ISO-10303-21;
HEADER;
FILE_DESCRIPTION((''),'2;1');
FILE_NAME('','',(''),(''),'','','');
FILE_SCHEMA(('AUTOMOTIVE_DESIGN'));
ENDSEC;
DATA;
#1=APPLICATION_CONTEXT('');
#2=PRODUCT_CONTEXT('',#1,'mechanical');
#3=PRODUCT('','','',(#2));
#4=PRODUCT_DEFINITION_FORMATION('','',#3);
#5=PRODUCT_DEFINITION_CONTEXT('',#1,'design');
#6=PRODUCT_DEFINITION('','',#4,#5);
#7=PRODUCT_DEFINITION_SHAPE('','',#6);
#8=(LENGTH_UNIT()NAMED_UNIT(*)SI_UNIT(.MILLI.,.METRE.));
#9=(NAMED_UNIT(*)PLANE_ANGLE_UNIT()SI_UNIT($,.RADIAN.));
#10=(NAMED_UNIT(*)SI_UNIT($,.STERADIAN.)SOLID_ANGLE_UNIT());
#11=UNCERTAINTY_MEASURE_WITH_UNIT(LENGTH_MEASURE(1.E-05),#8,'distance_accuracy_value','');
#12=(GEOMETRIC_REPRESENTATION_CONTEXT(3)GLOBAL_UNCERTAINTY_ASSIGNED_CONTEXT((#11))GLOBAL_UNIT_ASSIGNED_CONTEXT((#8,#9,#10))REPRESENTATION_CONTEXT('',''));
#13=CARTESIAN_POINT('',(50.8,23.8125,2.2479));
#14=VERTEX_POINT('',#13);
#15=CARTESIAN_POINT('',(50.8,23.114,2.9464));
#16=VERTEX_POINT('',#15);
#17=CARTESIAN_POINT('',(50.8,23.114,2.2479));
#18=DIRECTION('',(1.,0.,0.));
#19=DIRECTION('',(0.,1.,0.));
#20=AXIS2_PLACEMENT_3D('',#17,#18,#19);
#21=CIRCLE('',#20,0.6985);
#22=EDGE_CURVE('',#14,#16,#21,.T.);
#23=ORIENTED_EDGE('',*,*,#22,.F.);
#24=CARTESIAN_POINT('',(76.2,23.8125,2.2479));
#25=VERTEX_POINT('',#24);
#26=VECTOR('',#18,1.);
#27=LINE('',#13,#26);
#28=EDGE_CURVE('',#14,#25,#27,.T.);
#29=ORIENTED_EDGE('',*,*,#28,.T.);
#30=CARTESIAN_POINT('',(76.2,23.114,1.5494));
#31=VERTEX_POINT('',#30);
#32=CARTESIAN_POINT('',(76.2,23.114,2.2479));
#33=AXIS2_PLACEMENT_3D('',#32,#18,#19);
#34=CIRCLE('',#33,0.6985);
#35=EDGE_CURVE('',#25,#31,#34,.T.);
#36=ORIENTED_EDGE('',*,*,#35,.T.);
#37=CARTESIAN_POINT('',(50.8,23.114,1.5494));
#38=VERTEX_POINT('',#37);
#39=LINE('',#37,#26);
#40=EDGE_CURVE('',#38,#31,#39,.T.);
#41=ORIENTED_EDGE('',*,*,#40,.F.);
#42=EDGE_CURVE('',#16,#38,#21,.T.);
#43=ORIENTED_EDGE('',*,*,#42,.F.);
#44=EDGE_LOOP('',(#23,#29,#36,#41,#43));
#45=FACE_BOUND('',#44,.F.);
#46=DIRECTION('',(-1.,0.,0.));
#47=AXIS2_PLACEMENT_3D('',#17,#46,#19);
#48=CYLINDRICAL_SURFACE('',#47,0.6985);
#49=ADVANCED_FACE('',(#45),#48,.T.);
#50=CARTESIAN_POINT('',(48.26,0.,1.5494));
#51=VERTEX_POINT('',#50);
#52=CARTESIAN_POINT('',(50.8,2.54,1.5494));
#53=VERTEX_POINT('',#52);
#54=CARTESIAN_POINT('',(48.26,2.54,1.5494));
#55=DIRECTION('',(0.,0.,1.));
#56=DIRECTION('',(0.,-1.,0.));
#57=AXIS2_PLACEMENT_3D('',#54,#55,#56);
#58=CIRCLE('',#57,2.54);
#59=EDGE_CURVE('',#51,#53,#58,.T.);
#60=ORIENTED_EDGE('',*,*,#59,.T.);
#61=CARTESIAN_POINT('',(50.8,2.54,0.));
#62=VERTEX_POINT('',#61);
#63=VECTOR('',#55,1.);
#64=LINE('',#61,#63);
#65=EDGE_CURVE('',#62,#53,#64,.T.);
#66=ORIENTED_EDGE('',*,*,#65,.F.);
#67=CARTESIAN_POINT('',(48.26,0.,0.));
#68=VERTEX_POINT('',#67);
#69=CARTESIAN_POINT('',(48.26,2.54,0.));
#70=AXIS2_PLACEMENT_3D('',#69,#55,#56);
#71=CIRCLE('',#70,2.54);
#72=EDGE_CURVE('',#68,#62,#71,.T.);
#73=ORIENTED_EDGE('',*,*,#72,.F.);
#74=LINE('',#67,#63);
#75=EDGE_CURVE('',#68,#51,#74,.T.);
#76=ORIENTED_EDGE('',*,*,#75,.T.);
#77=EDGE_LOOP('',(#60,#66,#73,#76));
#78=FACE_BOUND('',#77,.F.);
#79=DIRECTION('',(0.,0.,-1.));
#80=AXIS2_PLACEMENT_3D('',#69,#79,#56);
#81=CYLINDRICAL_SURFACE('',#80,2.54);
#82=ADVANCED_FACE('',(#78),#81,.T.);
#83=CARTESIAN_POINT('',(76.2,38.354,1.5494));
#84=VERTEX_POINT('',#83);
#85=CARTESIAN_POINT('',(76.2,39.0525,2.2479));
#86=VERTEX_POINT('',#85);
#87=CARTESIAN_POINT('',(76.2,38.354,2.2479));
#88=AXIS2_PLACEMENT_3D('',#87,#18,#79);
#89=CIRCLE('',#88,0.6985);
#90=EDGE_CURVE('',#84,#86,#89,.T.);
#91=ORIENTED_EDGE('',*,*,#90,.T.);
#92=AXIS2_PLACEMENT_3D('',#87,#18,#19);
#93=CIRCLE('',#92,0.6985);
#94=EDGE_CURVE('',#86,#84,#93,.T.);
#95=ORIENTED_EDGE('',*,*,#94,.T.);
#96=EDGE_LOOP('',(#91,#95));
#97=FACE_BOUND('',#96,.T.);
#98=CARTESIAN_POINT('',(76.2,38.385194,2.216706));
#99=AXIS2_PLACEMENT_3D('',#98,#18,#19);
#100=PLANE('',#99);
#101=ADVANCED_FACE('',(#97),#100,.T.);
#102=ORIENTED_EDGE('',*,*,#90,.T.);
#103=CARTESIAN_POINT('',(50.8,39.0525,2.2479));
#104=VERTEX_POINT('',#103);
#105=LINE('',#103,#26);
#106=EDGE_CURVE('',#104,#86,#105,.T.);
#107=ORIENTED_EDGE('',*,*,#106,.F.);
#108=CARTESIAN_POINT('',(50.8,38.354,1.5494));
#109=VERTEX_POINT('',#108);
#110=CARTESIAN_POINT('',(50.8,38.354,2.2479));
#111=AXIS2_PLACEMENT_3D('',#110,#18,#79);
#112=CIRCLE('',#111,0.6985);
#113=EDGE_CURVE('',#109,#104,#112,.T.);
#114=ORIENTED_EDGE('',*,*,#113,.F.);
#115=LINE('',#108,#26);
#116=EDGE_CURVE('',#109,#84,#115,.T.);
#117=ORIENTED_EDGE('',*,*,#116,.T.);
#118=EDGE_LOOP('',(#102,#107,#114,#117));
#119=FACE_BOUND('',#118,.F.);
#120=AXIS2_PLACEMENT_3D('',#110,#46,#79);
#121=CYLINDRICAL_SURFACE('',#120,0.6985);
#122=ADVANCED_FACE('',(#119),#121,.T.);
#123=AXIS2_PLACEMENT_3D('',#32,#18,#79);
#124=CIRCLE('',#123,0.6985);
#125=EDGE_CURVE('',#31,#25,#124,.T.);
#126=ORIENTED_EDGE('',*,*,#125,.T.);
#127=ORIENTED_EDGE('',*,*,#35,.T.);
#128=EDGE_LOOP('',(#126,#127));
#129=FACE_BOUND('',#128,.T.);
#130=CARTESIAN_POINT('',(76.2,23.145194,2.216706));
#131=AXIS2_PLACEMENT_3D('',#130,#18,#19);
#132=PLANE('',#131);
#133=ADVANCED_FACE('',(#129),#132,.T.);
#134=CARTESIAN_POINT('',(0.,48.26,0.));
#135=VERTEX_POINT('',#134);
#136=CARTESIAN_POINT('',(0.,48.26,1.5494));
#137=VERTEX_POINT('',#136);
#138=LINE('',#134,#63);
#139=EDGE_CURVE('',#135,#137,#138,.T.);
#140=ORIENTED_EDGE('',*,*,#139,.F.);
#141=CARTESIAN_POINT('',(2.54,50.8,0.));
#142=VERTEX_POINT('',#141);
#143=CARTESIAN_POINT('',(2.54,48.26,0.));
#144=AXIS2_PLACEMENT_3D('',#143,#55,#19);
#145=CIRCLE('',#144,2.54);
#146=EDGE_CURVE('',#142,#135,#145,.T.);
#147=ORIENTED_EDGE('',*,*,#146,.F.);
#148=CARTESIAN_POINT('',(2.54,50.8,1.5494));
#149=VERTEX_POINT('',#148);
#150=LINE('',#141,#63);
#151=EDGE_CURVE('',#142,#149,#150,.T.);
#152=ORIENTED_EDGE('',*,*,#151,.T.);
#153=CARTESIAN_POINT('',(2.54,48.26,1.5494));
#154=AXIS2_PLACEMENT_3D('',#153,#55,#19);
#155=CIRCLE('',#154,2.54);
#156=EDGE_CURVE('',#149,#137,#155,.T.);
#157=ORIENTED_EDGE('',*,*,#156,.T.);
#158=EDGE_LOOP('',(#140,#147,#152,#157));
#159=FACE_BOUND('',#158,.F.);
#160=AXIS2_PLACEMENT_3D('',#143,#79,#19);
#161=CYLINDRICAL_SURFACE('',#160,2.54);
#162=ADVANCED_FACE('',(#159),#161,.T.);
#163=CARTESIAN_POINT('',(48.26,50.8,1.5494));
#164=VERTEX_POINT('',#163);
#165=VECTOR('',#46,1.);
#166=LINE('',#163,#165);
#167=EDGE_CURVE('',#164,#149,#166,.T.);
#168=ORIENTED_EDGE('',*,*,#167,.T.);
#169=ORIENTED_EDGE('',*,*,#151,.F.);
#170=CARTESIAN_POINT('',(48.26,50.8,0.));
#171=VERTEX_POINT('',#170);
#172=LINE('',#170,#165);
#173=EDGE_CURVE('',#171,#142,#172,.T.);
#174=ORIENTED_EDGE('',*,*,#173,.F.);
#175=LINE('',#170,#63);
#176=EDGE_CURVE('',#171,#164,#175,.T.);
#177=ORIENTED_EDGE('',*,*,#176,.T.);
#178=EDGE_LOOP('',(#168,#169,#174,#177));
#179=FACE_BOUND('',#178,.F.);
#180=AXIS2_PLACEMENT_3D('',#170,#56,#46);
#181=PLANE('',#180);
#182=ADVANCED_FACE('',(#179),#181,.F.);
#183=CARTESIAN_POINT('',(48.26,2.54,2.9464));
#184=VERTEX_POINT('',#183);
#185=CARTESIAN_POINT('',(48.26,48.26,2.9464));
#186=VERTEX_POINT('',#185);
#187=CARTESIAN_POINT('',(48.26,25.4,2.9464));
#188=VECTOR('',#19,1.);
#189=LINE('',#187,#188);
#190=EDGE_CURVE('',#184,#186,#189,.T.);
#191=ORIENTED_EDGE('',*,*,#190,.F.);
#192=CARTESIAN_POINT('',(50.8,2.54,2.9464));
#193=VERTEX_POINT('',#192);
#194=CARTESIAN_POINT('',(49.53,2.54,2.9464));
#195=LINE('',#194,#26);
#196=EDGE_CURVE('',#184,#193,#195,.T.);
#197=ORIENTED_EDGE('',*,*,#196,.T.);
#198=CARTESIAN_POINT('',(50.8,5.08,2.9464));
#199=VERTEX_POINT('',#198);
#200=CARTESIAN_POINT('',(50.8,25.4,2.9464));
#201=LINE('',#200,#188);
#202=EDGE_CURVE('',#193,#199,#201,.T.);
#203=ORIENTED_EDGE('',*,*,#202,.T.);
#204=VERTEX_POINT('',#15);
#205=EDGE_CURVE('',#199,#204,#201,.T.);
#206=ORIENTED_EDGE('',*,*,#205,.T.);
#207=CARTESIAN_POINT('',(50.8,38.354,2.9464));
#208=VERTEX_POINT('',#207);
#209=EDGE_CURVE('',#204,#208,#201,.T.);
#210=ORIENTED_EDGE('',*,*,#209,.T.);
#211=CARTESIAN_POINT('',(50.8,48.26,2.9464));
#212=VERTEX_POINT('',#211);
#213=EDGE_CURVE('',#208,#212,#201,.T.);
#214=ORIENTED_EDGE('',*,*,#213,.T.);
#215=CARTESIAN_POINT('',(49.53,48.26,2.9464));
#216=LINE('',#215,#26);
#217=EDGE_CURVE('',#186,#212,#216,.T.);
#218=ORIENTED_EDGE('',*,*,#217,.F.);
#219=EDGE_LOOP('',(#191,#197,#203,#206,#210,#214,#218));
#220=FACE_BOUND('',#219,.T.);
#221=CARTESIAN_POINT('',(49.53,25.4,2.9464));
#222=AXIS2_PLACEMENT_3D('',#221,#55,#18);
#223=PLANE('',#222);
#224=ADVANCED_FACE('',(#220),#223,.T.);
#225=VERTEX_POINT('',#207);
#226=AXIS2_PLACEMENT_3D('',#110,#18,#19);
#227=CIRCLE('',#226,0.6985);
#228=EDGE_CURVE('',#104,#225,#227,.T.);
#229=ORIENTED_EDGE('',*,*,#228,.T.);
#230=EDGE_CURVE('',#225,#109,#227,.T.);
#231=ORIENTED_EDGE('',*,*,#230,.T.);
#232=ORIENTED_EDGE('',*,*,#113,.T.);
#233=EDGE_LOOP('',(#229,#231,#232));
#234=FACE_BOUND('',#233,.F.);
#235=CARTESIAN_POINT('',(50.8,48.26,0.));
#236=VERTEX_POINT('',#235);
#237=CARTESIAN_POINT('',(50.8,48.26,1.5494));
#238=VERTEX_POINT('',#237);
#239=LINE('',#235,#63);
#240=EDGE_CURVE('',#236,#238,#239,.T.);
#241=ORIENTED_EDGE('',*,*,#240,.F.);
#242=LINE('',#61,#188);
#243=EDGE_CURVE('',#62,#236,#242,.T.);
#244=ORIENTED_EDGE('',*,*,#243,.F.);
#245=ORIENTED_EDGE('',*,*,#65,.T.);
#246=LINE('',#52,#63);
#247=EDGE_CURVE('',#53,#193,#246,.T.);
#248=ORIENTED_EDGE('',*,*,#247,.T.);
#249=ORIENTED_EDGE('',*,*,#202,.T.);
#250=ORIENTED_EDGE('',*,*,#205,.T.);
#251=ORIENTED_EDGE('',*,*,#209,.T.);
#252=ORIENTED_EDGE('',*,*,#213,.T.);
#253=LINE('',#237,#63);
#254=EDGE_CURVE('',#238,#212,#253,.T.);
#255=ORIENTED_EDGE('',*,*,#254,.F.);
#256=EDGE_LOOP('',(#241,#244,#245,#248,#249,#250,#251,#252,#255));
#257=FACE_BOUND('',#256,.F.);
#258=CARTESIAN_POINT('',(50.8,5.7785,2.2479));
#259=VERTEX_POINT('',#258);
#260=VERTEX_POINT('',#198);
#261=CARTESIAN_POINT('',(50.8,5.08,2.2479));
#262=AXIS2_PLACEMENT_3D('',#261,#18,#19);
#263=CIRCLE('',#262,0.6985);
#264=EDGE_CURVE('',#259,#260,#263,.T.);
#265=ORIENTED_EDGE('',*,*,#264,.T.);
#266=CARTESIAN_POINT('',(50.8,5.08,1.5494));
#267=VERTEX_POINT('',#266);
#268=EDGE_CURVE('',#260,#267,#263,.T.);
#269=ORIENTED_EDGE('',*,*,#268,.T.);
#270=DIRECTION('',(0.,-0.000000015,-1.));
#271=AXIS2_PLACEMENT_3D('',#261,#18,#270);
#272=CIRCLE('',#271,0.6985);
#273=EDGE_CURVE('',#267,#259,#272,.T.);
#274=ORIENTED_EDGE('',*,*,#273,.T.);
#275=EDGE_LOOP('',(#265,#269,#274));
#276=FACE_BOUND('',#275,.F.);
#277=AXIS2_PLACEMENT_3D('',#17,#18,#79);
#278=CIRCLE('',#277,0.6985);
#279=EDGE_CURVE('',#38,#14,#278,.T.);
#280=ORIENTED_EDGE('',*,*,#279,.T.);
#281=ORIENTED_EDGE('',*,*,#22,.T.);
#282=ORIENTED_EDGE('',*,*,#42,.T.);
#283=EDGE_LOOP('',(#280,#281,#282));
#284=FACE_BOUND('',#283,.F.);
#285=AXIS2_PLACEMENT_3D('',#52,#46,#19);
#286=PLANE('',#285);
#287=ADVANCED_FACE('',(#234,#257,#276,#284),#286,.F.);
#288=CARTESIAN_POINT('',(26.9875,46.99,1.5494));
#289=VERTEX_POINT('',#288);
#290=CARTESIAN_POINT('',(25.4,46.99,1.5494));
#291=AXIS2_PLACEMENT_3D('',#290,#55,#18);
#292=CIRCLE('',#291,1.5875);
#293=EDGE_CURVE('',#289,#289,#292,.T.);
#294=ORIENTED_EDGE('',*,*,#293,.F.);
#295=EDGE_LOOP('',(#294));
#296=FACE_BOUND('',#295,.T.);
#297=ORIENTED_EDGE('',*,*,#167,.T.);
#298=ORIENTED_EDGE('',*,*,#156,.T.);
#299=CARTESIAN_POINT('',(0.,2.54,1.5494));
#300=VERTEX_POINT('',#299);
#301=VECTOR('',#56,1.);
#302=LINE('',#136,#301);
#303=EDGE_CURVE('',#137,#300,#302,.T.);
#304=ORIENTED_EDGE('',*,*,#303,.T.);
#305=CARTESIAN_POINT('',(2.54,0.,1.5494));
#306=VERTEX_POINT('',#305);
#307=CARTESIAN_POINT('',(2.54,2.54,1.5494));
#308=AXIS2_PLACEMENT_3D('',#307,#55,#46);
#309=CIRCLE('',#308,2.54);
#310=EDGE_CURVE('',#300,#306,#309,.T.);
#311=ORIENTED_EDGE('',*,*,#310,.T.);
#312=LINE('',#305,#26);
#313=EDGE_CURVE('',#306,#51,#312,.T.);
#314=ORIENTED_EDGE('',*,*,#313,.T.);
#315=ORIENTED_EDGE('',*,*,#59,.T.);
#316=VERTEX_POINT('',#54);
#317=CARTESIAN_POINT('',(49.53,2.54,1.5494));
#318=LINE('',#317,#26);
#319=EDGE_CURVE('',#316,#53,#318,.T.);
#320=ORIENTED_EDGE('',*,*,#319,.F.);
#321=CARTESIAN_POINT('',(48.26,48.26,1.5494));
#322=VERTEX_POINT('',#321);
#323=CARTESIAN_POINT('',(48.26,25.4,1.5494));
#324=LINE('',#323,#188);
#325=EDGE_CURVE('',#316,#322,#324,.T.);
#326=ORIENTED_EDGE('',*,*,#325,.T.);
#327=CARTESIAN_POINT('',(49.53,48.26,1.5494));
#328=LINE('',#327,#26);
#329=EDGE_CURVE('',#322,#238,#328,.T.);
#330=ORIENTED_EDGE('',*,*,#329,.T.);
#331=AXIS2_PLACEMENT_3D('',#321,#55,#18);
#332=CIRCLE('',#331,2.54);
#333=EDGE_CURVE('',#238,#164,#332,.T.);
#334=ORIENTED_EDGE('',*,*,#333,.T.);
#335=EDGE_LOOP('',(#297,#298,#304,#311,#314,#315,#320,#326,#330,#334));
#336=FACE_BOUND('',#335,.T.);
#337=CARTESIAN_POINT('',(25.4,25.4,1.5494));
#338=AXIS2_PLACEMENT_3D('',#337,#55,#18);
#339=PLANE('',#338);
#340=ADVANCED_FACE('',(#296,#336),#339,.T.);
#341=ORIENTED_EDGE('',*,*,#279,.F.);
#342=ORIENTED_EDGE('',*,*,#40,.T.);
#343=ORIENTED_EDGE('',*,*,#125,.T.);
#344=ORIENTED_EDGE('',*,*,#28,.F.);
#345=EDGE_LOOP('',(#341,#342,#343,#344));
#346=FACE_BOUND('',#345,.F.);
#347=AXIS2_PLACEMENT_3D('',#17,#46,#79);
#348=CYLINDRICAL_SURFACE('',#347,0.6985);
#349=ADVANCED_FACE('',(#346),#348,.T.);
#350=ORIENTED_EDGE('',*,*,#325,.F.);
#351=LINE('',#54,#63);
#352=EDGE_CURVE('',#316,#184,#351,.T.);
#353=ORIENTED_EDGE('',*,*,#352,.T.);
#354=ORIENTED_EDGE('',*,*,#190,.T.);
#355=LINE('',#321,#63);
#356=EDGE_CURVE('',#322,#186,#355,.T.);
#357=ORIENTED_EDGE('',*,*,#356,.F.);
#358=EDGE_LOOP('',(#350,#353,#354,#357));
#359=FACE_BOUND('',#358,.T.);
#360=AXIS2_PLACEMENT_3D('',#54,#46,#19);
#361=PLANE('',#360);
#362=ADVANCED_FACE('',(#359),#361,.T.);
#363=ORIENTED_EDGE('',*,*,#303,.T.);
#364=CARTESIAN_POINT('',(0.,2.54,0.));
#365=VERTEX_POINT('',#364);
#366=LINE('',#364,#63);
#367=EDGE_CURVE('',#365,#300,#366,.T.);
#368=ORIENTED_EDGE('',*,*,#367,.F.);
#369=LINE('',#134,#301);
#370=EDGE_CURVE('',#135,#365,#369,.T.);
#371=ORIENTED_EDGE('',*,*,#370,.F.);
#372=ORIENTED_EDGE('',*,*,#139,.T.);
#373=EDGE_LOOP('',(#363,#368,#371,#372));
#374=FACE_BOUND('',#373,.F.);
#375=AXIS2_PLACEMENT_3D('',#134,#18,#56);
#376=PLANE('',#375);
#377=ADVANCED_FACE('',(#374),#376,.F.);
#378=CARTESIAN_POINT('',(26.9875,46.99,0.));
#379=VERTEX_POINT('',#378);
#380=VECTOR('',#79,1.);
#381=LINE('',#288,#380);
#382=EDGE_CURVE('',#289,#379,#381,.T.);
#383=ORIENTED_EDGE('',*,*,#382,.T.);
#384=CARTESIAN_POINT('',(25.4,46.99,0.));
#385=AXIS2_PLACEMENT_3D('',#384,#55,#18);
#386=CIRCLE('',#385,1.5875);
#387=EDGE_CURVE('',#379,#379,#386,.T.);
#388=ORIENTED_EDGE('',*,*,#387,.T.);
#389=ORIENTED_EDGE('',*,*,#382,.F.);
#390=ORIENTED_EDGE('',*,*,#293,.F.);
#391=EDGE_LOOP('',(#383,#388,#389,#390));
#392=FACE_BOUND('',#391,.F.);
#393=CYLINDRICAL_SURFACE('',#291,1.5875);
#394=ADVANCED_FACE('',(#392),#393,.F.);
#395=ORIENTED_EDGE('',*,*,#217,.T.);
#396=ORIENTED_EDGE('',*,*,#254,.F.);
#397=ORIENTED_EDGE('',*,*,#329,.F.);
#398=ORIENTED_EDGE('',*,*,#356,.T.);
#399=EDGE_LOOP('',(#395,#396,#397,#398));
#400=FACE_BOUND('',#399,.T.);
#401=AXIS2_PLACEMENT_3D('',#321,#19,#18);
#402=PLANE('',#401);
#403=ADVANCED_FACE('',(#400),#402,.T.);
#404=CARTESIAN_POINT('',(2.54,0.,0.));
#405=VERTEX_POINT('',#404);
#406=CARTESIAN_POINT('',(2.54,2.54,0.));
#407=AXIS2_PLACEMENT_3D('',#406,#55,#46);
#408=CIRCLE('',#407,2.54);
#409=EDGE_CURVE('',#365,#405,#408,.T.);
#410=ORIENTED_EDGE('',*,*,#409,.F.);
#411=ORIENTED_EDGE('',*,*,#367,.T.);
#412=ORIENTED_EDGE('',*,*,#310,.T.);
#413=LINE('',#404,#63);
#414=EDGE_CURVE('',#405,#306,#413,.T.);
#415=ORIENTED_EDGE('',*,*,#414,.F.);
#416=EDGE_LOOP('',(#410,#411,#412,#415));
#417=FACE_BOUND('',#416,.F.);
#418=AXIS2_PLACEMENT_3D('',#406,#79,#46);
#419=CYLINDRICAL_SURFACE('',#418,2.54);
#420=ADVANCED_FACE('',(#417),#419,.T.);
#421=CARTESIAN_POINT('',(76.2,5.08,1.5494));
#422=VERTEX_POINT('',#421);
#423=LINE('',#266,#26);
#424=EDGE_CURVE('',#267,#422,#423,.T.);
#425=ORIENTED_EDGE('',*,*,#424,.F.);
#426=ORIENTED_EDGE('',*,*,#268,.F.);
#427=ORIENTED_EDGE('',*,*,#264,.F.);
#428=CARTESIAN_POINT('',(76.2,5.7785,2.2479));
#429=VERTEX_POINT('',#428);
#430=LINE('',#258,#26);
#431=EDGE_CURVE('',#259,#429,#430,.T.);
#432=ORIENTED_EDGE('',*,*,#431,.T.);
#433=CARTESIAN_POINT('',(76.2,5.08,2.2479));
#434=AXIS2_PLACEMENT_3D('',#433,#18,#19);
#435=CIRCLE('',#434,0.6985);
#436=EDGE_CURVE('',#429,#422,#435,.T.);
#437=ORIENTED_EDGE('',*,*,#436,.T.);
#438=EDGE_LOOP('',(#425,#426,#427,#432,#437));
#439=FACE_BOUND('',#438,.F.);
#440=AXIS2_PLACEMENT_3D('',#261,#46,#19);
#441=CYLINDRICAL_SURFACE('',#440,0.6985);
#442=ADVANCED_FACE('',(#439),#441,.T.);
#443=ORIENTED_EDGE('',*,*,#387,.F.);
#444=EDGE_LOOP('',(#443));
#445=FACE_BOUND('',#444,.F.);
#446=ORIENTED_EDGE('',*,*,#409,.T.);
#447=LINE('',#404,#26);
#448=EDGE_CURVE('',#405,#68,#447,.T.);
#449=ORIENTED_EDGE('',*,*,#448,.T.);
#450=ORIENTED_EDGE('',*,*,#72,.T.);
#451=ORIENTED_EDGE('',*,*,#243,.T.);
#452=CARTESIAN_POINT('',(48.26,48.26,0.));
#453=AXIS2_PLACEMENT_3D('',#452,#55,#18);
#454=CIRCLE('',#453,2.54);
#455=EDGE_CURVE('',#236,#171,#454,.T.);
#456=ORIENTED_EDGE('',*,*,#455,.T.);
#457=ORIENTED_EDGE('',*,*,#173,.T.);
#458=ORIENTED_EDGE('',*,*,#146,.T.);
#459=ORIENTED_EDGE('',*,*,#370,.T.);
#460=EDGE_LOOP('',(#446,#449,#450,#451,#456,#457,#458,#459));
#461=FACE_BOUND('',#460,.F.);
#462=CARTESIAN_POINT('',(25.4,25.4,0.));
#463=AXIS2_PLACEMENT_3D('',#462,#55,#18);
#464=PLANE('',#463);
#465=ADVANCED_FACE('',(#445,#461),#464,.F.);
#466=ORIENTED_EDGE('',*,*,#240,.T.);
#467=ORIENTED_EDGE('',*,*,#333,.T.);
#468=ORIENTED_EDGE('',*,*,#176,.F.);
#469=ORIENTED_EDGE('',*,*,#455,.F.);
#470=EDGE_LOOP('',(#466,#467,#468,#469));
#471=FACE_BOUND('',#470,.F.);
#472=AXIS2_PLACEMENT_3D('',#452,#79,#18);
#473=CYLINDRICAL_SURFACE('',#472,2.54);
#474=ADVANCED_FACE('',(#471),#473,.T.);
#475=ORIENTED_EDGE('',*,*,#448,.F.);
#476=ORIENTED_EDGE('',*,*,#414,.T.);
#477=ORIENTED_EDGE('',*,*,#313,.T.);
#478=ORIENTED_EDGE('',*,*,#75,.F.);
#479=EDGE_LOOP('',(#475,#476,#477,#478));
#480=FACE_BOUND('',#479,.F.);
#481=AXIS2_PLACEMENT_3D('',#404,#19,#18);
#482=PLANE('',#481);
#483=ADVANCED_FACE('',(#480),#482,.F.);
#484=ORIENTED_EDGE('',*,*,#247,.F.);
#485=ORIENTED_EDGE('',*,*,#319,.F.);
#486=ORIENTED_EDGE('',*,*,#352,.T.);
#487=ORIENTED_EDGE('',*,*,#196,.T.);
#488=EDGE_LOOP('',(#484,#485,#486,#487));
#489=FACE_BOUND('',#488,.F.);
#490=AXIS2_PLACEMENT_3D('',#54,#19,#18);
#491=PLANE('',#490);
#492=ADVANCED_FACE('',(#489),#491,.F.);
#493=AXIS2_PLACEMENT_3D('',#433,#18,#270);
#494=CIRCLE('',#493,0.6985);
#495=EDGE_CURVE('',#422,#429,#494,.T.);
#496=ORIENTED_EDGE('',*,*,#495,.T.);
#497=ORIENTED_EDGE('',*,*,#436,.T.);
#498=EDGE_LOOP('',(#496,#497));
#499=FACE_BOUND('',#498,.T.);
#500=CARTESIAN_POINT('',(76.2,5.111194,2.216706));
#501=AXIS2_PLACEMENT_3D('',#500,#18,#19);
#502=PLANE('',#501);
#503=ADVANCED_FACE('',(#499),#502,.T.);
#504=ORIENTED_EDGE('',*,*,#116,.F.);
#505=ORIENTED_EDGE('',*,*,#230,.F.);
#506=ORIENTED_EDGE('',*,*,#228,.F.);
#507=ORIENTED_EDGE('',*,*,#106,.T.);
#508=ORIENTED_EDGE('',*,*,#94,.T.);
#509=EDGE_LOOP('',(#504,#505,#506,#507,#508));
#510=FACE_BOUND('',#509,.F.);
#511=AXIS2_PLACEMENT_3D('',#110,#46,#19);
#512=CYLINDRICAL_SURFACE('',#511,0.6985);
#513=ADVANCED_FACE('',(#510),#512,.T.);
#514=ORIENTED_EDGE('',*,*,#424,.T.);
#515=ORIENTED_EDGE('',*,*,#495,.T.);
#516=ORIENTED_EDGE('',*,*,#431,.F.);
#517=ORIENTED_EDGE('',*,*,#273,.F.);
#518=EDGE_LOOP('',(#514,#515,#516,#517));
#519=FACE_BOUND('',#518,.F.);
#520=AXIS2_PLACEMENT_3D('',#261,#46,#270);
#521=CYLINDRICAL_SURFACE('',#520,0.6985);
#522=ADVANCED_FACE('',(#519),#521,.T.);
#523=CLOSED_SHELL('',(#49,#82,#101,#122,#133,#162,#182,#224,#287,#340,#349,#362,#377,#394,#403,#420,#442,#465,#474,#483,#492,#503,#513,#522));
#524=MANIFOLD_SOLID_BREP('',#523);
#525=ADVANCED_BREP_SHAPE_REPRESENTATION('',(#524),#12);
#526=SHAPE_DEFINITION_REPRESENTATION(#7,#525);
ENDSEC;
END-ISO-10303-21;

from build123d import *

# Parameters (mm, degrees)
F1_DEPTH = 1.5494
F2_R     = 1.5875
F3_DEPTH = 25.4
F5_W     = 2.54
F5_H     = 45.72
F6_DEPTH = 1.397
F7_DEPTH = 25.4


# Not quite as in the source:
# - a feature names something its author has since deleted; it is built from what else it names


with BuildPart() as f1:
    # F0 (on Top) → F1 (new body)
    with BuildSketch(Plane.XY):
        with BuildLine():
            ThreePointArc((0, 2.54), (0.7439487758, 0.7439487758), (2.54, 0))
            Line((2.54, 0), (48.26, 0))
            ThreePointArc((48.26, 0), (50.0560512242, 0.7439487758), (50.8, 2.54))
            Line((50.8, 2.54), (50.8, 48.26))
            ThreePointArc((50.8, 48.26), (50.0560512242, 50.0560512242), (48.26, 50.8))
            Line((48.26, 50.8), (2.54, 50.8))
            ThreePointArc((2.54, 50.8), (0.7439487758, 50.0560512242), (0, 48.26))
            Line((0, 48.26), (0, 2.54))
        make_face()
    extrude(amount=F1_DEPTH)

    # F2 (on face) → F3 (cut)
    with BuildSketch(Plane.XY.offset(1.5494)):
        with Locations((25.4, 46.99)):
            Circle(F2_R)
    extrude(amount=-F3_DEPTH, mode=Mode.SUBTRACT)

    # F5 (on face) → F6 (join)
    with BuildSketch(Plane.XY.offset(1.5494)):
        with Locations((49.53, 25.4)):
            Rectangle(F5_W, F5_H)
    extrude(amount=F6_DEPTH)

    # F4 (on face) → F7 (join)
    with BuildSketch(Plane.YZ.offset(50.8)):
        with BuildLine():
            ThreePointArc((5.0799999892, 1.5494), (5.5739140828, 1.7539859095), (5.7785, 2.2479))
            ThreePointArc((5.7785, 2.2479), (4.5860859172, 2.7418140905), (5.0799999892, 1.5494))
        make_face()
        with BuildLine():
            ThreePointArc((23.8125, 2.2479), (22.6200859133, 2.7418140867), (23.114, 1.5494))
            ThreePointArc((23.114, 1.5494), (23.6079140867, 1.7539859133), (23.8125, 2.2479))
        make_face()
        with BuildLine():
            ThreePointArc((39.0525, 2.2479), (37.8600859133, 2.7418140867), (38.354, 1.5494))
            ThreePointArc((38.354, 1.5494), (38.8479140867, 1.7539859133), (39.0525, 2.2479))
        make_face()
    extrude(amount=F7_DEPTH)


solid = f1.part
